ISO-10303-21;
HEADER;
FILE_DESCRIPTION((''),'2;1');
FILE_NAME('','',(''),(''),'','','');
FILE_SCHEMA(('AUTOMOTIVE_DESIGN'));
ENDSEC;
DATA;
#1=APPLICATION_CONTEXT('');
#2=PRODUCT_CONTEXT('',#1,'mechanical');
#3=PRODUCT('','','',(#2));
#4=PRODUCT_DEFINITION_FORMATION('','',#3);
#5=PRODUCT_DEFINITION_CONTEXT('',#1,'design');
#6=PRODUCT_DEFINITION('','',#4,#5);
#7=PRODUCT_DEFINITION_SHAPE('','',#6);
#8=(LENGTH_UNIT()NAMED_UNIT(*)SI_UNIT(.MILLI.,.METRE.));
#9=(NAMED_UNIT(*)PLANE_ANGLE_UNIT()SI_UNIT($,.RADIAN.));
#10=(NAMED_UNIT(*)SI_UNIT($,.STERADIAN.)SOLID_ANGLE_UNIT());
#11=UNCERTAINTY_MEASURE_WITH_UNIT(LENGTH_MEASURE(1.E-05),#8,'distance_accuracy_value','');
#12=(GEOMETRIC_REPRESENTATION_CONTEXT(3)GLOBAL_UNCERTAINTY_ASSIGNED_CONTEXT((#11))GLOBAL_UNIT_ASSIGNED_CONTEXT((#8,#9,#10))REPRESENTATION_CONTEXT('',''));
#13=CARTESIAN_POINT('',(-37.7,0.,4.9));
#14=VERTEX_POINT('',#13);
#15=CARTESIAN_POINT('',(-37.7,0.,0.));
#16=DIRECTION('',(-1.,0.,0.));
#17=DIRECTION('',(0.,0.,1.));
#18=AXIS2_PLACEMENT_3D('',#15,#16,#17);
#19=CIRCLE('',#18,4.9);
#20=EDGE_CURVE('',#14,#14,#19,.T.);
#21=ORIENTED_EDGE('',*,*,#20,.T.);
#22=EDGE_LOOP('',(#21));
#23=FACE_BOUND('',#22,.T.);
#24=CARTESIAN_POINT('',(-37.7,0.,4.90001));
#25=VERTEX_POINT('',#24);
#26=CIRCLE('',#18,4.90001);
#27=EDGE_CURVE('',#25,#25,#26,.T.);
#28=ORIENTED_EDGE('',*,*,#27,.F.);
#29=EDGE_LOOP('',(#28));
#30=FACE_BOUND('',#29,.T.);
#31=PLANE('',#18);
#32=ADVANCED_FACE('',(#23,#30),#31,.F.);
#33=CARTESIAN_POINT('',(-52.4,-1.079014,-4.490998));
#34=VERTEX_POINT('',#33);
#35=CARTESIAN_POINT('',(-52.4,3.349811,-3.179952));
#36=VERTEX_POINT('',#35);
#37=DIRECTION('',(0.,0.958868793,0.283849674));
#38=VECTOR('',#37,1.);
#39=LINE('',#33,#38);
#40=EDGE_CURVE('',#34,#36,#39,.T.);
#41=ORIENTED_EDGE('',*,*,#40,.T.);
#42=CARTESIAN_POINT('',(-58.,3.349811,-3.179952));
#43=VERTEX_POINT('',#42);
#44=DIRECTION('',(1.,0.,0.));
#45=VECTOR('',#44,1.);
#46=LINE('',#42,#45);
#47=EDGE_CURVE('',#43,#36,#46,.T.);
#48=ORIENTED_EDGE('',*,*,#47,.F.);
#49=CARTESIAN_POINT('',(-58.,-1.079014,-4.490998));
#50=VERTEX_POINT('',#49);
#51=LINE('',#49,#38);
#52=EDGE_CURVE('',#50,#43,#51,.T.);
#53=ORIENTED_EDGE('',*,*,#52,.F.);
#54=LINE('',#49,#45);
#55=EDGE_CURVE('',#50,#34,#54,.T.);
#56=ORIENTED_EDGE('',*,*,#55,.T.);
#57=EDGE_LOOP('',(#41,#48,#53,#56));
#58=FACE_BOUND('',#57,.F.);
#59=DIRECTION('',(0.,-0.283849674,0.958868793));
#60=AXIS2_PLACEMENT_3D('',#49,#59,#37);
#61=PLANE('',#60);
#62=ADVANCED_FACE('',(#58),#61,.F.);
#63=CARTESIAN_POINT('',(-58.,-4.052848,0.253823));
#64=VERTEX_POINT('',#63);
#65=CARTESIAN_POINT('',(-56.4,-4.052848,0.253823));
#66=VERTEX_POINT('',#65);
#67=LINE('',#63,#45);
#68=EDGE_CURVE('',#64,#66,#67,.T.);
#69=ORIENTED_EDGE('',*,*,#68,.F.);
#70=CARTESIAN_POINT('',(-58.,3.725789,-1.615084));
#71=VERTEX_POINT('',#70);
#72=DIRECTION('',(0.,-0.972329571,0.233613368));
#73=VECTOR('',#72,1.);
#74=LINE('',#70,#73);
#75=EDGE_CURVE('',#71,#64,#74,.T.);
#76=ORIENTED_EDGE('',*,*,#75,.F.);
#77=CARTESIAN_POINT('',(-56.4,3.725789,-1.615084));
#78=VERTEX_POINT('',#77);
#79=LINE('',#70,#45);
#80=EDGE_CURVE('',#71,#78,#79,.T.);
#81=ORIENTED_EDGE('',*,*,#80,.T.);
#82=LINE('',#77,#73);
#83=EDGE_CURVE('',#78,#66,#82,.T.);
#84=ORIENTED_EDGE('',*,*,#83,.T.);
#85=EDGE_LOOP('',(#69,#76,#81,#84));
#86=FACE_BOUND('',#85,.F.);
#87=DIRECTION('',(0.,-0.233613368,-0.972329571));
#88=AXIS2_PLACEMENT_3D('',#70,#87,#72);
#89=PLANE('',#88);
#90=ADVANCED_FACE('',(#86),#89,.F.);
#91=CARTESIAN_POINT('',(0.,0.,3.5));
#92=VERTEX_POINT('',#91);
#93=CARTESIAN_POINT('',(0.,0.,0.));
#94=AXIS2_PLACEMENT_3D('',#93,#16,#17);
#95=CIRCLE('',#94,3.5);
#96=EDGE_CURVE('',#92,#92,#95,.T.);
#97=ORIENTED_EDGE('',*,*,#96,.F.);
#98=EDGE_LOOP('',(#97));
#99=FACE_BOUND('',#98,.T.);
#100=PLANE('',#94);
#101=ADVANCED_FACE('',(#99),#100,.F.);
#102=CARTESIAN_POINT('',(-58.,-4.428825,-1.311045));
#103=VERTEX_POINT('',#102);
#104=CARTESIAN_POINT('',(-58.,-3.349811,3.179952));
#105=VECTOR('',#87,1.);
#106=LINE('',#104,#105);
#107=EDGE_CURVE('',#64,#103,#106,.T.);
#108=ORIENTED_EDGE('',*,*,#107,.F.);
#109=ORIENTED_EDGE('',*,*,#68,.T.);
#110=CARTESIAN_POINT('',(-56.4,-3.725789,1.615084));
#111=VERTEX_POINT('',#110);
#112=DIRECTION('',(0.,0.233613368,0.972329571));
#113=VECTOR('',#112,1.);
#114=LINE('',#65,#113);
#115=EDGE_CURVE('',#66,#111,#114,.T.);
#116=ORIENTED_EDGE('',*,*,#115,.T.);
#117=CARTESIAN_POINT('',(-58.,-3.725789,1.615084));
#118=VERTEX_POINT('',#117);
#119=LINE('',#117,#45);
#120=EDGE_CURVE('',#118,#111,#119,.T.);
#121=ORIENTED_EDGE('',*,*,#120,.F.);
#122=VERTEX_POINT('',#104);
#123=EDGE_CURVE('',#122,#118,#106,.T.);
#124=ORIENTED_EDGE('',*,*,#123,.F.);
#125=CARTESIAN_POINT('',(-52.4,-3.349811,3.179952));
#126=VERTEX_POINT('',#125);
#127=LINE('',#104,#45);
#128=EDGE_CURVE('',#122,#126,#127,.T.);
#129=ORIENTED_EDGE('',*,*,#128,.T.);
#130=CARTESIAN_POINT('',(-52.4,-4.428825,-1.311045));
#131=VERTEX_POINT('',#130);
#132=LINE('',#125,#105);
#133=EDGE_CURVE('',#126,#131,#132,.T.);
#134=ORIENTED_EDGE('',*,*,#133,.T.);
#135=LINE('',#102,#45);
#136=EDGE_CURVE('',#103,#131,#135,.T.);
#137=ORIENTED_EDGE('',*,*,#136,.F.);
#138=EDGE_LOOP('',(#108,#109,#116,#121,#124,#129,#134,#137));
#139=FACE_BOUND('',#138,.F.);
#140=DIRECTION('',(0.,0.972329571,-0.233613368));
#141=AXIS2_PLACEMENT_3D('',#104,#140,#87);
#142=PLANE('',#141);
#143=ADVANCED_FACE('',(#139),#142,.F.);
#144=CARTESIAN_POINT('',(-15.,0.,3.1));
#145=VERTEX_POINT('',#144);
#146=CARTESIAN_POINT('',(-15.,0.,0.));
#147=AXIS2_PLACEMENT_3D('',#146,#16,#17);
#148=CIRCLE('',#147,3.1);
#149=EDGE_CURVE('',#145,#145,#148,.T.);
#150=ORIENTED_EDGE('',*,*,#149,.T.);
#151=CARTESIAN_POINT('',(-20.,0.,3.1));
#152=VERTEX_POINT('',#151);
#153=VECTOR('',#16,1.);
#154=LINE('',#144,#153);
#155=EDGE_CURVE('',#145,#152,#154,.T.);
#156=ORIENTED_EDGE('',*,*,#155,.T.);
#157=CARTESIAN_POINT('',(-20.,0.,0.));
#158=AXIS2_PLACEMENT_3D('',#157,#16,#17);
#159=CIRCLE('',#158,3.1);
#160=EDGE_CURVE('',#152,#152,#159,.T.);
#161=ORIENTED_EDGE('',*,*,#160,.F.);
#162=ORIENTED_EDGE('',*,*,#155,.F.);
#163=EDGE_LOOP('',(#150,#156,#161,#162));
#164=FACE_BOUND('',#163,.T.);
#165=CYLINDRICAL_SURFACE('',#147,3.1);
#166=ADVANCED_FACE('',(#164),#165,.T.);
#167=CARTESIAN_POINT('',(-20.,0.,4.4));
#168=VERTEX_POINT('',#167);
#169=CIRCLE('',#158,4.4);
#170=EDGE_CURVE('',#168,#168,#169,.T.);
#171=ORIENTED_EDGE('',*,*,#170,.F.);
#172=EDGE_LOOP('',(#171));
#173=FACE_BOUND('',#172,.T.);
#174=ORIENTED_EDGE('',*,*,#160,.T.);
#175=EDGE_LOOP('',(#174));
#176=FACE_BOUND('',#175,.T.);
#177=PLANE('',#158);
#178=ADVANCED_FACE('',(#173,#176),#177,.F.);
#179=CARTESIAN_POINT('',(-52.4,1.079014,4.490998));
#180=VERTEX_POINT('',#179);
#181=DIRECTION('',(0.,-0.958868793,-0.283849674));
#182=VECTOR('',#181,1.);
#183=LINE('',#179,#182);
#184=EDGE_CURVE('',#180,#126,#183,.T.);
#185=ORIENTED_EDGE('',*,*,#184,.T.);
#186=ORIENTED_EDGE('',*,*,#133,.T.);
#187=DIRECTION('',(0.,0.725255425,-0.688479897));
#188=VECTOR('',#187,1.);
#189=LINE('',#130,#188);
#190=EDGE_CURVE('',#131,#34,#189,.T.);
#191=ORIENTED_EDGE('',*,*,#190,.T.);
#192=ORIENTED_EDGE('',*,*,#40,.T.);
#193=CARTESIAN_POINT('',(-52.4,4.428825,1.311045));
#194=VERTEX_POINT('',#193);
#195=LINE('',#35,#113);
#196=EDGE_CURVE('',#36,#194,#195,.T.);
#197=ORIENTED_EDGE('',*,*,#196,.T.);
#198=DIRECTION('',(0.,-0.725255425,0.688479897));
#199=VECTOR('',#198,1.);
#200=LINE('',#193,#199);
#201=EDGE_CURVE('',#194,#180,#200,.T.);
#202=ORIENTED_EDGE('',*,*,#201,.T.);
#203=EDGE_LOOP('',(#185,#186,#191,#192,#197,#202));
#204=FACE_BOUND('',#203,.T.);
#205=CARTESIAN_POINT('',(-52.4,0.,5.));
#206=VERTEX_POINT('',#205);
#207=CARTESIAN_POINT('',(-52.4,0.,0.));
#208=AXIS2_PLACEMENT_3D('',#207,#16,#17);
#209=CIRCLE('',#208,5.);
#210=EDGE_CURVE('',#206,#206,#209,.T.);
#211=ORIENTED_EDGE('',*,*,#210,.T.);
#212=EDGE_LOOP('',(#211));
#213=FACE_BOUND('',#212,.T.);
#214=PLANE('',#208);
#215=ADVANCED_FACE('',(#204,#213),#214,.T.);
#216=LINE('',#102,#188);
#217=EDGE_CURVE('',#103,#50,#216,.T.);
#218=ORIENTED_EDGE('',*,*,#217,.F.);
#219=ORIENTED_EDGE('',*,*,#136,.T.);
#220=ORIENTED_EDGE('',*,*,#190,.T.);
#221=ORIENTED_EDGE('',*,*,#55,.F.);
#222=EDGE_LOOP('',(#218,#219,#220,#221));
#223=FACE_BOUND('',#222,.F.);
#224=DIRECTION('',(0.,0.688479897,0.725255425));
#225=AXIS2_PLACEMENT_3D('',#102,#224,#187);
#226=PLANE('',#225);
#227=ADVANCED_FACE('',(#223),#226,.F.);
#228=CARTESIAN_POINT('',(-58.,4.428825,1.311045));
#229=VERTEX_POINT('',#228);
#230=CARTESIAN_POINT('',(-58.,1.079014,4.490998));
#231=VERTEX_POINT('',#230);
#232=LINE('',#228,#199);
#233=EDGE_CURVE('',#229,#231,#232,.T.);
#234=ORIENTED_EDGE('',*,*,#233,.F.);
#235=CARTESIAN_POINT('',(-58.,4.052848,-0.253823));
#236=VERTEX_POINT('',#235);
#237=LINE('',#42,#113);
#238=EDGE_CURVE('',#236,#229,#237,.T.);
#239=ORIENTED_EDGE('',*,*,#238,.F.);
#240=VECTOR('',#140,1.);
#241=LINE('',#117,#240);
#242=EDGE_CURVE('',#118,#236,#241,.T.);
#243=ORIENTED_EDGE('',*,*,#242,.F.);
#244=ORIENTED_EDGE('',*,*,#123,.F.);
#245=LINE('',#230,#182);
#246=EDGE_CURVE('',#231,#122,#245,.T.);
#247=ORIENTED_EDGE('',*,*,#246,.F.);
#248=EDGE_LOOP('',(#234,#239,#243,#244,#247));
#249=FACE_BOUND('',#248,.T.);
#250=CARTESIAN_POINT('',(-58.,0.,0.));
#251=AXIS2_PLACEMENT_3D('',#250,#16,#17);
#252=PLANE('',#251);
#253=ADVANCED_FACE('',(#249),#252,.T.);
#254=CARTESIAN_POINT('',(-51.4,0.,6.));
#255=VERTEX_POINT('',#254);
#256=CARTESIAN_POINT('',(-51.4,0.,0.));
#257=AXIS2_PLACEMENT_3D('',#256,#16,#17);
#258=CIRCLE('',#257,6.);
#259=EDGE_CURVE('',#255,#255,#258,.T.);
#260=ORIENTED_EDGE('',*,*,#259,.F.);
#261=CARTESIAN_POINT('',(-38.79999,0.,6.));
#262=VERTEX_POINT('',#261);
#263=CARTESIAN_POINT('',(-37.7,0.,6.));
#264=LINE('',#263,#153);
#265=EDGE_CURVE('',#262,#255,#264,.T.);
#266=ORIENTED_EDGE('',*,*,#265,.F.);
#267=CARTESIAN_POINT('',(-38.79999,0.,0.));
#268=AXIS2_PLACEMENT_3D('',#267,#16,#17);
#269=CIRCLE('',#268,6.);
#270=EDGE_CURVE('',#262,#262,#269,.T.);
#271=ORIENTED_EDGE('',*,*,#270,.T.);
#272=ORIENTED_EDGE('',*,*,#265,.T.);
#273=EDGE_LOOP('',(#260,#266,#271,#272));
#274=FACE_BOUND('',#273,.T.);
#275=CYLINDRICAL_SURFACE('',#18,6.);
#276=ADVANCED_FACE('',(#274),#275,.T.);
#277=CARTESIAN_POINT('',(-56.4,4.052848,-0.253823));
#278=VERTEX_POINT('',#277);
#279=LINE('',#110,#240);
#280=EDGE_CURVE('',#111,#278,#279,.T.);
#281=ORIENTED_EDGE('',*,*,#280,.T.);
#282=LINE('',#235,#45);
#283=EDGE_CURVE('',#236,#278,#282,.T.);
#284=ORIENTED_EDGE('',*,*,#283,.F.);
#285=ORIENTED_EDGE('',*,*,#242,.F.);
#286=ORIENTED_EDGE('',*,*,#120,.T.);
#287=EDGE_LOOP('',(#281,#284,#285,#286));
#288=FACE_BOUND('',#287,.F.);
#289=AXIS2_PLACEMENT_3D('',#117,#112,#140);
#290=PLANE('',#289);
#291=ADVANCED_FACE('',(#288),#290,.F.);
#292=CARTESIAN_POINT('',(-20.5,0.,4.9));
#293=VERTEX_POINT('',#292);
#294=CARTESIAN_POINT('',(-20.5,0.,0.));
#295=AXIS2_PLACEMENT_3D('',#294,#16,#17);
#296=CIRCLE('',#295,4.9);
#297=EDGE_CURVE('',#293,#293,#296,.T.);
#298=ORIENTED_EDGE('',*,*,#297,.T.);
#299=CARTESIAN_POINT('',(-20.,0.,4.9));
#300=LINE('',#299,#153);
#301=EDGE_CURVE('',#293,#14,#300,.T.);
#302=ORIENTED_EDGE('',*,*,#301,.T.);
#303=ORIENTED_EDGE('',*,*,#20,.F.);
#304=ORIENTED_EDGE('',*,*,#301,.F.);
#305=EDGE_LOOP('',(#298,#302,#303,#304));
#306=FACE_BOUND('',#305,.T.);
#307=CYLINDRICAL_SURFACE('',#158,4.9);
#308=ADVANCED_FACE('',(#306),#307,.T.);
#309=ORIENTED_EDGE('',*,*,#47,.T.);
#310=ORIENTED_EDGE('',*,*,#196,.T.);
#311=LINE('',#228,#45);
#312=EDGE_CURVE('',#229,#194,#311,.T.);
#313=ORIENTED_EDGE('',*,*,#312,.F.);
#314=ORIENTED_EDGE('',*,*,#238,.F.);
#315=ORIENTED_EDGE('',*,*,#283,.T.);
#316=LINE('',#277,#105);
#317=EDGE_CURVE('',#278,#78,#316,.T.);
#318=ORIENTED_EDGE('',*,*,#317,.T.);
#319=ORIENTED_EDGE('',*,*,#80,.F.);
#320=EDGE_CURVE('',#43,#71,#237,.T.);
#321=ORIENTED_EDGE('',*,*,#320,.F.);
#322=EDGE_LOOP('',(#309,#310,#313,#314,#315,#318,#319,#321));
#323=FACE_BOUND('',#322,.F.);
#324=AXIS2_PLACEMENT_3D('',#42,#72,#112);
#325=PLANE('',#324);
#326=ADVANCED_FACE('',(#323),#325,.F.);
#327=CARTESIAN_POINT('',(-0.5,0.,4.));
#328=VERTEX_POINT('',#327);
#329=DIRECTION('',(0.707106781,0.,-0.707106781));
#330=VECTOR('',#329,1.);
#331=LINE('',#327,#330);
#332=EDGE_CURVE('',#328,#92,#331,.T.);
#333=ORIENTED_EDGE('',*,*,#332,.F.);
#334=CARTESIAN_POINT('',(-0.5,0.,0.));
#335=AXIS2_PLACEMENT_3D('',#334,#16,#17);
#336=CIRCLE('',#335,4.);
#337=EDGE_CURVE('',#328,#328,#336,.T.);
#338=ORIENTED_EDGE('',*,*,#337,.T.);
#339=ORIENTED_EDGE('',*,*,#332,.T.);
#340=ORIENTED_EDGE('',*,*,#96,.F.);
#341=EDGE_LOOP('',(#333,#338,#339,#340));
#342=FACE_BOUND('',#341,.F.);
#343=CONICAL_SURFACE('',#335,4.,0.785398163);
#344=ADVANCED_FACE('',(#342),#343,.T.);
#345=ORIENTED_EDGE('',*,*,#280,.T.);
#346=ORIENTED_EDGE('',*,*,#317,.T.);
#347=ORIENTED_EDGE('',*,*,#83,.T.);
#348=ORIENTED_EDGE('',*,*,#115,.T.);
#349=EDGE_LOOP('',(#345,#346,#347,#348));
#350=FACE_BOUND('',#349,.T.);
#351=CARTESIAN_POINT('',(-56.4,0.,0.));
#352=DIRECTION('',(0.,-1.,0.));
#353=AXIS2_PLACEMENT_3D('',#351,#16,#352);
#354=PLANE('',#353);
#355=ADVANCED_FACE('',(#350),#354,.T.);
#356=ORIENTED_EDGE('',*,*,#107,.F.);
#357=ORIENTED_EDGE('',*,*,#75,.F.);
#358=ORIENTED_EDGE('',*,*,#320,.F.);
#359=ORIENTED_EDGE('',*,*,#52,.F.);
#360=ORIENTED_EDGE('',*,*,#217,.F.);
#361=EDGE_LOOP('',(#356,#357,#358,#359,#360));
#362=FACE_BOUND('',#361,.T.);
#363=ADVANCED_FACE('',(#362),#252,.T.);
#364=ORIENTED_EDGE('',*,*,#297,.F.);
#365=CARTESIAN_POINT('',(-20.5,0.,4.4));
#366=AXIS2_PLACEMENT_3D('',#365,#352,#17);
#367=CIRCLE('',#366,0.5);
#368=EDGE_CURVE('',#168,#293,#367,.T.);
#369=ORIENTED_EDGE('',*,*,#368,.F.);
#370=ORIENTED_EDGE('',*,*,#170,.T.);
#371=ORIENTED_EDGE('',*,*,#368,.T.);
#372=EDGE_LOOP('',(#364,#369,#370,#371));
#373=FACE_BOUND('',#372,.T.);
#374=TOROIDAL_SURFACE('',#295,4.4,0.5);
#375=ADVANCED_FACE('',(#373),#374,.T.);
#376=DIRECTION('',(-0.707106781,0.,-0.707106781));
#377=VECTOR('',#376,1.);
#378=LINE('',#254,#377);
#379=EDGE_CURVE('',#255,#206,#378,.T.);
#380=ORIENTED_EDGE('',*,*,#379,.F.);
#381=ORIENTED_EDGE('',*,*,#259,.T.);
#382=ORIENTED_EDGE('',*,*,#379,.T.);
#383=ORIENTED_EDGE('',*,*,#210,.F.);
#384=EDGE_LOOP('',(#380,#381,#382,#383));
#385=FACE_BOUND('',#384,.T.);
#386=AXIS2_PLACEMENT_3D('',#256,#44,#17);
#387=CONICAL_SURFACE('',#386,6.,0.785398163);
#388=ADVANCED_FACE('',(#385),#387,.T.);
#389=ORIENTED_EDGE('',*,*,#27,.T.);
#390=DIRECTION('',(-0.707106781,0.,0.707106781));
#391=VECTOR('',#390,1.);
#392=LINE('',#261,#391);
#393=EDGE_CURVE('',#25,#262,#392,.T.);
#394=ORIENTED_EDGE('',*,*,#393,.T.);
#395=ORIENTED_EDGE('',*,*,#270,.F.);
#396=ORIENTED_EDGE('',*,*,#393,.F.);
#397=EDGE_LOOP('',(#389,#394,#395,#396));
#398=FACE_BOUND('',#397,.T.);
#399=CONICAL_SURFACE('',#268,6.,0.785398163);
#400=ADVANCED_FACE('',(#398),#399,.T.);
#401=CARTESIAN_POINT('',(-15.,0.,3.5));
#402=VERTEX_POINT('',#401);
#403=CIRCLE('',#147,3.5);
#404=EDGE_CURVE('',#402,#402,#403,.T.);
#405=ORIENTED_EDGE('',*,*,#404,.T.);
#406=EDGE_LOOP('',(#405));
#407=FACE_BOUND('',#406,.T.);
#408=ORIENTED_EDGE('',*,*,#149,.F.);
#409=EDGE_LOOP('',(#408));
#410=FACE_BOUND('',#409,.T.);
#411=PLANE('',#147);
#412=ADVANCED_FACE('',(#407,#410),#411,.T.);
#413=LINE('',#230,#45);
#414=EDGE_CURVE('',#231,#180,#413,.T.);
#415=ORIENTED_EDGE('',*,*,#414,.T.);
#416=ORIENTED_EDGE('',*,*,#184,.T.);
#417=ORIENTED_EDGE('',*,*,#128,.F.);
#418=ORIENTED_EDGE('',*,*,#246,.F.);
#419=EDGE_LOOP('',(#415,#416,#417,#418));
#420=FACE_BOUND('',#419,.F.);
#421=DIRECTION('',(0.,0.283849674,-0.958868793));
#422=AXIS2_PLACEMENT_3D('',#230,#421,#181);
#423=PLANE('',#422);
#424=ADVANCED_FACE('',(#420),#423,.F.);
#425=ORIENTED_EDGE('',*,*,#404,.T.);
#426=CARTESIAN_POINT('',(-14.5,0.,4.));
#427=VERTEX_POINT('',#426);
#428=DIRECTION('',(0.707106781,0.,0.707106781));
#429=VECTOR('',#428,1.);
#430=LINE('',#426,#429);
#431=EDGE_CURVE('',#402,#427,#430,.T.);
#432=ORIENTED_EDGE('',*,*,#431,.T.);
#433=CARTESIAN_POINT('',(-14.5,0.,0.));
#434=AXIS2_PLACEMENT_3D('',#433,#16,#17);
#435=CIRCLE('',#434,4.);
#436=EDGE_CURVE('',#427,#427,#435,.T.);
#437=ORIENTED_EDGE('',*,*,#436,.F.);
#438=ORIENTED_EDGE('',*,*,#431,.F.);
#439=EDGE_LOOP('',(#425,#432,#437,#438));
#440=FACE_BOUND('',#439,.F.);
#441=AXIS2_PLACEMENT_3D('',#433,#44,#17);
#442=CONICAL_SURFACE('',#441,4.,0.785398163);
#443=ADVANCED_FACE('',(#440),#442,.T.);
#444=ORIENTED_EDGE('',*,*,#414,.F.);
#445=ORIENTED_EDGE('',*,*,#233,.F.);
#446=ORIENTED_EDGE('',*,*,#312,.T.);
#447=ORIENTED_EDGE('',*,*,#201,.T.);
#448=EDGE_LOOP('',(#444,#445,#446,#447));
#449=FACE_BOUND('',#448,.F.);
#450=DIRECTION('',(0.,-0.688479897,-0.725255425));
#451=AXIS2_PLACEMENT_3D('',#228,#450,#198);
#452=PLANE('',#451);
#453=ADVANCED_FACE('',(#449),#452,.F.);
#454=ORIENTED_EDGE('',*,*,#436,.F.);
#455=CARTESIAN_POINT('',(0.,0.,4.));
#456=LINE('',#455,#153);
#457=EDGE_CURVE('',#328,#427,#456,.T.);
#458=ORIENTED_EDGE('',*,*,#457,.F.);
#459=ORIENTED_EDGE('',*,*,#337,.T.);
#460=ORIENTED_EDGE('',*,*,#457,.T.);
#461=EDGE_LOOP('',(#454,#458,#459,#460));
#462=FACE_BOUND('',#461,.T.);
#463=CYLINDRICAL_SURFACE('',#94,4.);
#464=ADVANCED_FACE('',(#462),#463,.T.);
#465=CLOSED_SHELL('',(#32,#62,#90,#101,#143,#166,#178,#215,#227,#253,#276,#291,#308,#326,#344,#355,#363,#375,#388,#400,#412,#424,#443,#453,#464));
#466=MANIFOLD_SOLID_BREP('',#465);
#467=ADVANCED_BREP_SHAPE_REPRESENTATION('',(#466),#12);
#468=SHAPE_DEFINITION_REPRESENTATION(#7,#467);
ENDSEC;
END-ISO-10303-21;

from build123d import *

# Parameters (mm, degrees)
F2_R     = 8.471957502
F3_DEPTH = 5.6
F4_SIZE  = 1.09999
F5_SIZE  = 1
F6_SIZE  = 0.5
F7_R     = 0.5
F9_DEPTH = 1.6


# Not quite as in the source:
# - a fillet or chamfer is up to 0.001 mm smaller than in the source, because OpenCascade refuses the exact size


with BuildPart() as f1:
    # F0 (on Front) → F1 (revolve)
    with BuildSketch(Plane.XZ):
        Polygon((-58, 0), (0, 0), (0, 4), (-15, 4), (-15, 3.1), (-20, 3.1), (-20, 4.9), (-37.7, 4.9), (-37.7, 6), (-52.4, 6), (-52.4, 5), (-58, 5), align=None)
    revolve(axis=Axis((-31.3887451561, 0, 0), (-1, 0, 0)))

    # F2 (on face) → F3 (cut, through all)
    with BuildSketch(Plane(origin=(-58, 0, 0), x_dir=(0, -1, 0), z_dir=(-1, 0, 0))):
        Circle(F2_R)
        Polygon((-1.0790139268, 4.4909979157), (3.34981132, 3.1799524295), (4.4288252468, -1.3110454863), (1.0790139268, -4.4909979157), (-3.34981132, -3.1799524295), (-4.4288252468, 1.3110454863), align=None, mode=Mode.SUBTRACT)
    extrude(amount=-F3_DEPTH, mode=Mode.SUBTRACT)

    # F4 (size 1.1 in the source; OpenCascade refuses exactly that, so slightly less here)
    f4_edges = [f1.edges().sort_by_distance(p)[0] for p in [
        (-37.7, 0, -6),
    ]]
    chamfer(f4_edges, length=F4_SIZE)

    # F5
    f5_edges = [f1.edges().sort_by_distance(p)[0] for p in [
        (-52.4, 0, -6),
    ]]
    chamfer(f5_edges, length=F5_SIZE)

    # F6
    f6_edges = [f1.edges().sort_by_distance(p)[0] for p in [
        (0, 0, -4),
        (-15, 0, -4),
    ]]
    chamfer(f6_edges, length=F6_SIZE)

    # F7
    f7_edges = [f1.edges().sort_by_distance(p)[0] for p in [
        (-20, 0, -4.9),
    ]]
    fillet(f7_edges, radius=F7_R)

    # F8 (on face) → F9 (cut)
    with BuildSketch(Plane(origin=(-58, 0, 0), x_dir=(0, -1, 0), z_dir=(-1, 0, 0))):
        Polygon((-4.0528476409, -0.253822772), (-3.7257889258, -1.6150841712), (4.0528476409, 0.253822772), (3.7257889258, 1.6150841712), align=None)
    extrude(amount=-F9_DEPTH, mode=Mode.SUBTRACT)


solid = f1.part
